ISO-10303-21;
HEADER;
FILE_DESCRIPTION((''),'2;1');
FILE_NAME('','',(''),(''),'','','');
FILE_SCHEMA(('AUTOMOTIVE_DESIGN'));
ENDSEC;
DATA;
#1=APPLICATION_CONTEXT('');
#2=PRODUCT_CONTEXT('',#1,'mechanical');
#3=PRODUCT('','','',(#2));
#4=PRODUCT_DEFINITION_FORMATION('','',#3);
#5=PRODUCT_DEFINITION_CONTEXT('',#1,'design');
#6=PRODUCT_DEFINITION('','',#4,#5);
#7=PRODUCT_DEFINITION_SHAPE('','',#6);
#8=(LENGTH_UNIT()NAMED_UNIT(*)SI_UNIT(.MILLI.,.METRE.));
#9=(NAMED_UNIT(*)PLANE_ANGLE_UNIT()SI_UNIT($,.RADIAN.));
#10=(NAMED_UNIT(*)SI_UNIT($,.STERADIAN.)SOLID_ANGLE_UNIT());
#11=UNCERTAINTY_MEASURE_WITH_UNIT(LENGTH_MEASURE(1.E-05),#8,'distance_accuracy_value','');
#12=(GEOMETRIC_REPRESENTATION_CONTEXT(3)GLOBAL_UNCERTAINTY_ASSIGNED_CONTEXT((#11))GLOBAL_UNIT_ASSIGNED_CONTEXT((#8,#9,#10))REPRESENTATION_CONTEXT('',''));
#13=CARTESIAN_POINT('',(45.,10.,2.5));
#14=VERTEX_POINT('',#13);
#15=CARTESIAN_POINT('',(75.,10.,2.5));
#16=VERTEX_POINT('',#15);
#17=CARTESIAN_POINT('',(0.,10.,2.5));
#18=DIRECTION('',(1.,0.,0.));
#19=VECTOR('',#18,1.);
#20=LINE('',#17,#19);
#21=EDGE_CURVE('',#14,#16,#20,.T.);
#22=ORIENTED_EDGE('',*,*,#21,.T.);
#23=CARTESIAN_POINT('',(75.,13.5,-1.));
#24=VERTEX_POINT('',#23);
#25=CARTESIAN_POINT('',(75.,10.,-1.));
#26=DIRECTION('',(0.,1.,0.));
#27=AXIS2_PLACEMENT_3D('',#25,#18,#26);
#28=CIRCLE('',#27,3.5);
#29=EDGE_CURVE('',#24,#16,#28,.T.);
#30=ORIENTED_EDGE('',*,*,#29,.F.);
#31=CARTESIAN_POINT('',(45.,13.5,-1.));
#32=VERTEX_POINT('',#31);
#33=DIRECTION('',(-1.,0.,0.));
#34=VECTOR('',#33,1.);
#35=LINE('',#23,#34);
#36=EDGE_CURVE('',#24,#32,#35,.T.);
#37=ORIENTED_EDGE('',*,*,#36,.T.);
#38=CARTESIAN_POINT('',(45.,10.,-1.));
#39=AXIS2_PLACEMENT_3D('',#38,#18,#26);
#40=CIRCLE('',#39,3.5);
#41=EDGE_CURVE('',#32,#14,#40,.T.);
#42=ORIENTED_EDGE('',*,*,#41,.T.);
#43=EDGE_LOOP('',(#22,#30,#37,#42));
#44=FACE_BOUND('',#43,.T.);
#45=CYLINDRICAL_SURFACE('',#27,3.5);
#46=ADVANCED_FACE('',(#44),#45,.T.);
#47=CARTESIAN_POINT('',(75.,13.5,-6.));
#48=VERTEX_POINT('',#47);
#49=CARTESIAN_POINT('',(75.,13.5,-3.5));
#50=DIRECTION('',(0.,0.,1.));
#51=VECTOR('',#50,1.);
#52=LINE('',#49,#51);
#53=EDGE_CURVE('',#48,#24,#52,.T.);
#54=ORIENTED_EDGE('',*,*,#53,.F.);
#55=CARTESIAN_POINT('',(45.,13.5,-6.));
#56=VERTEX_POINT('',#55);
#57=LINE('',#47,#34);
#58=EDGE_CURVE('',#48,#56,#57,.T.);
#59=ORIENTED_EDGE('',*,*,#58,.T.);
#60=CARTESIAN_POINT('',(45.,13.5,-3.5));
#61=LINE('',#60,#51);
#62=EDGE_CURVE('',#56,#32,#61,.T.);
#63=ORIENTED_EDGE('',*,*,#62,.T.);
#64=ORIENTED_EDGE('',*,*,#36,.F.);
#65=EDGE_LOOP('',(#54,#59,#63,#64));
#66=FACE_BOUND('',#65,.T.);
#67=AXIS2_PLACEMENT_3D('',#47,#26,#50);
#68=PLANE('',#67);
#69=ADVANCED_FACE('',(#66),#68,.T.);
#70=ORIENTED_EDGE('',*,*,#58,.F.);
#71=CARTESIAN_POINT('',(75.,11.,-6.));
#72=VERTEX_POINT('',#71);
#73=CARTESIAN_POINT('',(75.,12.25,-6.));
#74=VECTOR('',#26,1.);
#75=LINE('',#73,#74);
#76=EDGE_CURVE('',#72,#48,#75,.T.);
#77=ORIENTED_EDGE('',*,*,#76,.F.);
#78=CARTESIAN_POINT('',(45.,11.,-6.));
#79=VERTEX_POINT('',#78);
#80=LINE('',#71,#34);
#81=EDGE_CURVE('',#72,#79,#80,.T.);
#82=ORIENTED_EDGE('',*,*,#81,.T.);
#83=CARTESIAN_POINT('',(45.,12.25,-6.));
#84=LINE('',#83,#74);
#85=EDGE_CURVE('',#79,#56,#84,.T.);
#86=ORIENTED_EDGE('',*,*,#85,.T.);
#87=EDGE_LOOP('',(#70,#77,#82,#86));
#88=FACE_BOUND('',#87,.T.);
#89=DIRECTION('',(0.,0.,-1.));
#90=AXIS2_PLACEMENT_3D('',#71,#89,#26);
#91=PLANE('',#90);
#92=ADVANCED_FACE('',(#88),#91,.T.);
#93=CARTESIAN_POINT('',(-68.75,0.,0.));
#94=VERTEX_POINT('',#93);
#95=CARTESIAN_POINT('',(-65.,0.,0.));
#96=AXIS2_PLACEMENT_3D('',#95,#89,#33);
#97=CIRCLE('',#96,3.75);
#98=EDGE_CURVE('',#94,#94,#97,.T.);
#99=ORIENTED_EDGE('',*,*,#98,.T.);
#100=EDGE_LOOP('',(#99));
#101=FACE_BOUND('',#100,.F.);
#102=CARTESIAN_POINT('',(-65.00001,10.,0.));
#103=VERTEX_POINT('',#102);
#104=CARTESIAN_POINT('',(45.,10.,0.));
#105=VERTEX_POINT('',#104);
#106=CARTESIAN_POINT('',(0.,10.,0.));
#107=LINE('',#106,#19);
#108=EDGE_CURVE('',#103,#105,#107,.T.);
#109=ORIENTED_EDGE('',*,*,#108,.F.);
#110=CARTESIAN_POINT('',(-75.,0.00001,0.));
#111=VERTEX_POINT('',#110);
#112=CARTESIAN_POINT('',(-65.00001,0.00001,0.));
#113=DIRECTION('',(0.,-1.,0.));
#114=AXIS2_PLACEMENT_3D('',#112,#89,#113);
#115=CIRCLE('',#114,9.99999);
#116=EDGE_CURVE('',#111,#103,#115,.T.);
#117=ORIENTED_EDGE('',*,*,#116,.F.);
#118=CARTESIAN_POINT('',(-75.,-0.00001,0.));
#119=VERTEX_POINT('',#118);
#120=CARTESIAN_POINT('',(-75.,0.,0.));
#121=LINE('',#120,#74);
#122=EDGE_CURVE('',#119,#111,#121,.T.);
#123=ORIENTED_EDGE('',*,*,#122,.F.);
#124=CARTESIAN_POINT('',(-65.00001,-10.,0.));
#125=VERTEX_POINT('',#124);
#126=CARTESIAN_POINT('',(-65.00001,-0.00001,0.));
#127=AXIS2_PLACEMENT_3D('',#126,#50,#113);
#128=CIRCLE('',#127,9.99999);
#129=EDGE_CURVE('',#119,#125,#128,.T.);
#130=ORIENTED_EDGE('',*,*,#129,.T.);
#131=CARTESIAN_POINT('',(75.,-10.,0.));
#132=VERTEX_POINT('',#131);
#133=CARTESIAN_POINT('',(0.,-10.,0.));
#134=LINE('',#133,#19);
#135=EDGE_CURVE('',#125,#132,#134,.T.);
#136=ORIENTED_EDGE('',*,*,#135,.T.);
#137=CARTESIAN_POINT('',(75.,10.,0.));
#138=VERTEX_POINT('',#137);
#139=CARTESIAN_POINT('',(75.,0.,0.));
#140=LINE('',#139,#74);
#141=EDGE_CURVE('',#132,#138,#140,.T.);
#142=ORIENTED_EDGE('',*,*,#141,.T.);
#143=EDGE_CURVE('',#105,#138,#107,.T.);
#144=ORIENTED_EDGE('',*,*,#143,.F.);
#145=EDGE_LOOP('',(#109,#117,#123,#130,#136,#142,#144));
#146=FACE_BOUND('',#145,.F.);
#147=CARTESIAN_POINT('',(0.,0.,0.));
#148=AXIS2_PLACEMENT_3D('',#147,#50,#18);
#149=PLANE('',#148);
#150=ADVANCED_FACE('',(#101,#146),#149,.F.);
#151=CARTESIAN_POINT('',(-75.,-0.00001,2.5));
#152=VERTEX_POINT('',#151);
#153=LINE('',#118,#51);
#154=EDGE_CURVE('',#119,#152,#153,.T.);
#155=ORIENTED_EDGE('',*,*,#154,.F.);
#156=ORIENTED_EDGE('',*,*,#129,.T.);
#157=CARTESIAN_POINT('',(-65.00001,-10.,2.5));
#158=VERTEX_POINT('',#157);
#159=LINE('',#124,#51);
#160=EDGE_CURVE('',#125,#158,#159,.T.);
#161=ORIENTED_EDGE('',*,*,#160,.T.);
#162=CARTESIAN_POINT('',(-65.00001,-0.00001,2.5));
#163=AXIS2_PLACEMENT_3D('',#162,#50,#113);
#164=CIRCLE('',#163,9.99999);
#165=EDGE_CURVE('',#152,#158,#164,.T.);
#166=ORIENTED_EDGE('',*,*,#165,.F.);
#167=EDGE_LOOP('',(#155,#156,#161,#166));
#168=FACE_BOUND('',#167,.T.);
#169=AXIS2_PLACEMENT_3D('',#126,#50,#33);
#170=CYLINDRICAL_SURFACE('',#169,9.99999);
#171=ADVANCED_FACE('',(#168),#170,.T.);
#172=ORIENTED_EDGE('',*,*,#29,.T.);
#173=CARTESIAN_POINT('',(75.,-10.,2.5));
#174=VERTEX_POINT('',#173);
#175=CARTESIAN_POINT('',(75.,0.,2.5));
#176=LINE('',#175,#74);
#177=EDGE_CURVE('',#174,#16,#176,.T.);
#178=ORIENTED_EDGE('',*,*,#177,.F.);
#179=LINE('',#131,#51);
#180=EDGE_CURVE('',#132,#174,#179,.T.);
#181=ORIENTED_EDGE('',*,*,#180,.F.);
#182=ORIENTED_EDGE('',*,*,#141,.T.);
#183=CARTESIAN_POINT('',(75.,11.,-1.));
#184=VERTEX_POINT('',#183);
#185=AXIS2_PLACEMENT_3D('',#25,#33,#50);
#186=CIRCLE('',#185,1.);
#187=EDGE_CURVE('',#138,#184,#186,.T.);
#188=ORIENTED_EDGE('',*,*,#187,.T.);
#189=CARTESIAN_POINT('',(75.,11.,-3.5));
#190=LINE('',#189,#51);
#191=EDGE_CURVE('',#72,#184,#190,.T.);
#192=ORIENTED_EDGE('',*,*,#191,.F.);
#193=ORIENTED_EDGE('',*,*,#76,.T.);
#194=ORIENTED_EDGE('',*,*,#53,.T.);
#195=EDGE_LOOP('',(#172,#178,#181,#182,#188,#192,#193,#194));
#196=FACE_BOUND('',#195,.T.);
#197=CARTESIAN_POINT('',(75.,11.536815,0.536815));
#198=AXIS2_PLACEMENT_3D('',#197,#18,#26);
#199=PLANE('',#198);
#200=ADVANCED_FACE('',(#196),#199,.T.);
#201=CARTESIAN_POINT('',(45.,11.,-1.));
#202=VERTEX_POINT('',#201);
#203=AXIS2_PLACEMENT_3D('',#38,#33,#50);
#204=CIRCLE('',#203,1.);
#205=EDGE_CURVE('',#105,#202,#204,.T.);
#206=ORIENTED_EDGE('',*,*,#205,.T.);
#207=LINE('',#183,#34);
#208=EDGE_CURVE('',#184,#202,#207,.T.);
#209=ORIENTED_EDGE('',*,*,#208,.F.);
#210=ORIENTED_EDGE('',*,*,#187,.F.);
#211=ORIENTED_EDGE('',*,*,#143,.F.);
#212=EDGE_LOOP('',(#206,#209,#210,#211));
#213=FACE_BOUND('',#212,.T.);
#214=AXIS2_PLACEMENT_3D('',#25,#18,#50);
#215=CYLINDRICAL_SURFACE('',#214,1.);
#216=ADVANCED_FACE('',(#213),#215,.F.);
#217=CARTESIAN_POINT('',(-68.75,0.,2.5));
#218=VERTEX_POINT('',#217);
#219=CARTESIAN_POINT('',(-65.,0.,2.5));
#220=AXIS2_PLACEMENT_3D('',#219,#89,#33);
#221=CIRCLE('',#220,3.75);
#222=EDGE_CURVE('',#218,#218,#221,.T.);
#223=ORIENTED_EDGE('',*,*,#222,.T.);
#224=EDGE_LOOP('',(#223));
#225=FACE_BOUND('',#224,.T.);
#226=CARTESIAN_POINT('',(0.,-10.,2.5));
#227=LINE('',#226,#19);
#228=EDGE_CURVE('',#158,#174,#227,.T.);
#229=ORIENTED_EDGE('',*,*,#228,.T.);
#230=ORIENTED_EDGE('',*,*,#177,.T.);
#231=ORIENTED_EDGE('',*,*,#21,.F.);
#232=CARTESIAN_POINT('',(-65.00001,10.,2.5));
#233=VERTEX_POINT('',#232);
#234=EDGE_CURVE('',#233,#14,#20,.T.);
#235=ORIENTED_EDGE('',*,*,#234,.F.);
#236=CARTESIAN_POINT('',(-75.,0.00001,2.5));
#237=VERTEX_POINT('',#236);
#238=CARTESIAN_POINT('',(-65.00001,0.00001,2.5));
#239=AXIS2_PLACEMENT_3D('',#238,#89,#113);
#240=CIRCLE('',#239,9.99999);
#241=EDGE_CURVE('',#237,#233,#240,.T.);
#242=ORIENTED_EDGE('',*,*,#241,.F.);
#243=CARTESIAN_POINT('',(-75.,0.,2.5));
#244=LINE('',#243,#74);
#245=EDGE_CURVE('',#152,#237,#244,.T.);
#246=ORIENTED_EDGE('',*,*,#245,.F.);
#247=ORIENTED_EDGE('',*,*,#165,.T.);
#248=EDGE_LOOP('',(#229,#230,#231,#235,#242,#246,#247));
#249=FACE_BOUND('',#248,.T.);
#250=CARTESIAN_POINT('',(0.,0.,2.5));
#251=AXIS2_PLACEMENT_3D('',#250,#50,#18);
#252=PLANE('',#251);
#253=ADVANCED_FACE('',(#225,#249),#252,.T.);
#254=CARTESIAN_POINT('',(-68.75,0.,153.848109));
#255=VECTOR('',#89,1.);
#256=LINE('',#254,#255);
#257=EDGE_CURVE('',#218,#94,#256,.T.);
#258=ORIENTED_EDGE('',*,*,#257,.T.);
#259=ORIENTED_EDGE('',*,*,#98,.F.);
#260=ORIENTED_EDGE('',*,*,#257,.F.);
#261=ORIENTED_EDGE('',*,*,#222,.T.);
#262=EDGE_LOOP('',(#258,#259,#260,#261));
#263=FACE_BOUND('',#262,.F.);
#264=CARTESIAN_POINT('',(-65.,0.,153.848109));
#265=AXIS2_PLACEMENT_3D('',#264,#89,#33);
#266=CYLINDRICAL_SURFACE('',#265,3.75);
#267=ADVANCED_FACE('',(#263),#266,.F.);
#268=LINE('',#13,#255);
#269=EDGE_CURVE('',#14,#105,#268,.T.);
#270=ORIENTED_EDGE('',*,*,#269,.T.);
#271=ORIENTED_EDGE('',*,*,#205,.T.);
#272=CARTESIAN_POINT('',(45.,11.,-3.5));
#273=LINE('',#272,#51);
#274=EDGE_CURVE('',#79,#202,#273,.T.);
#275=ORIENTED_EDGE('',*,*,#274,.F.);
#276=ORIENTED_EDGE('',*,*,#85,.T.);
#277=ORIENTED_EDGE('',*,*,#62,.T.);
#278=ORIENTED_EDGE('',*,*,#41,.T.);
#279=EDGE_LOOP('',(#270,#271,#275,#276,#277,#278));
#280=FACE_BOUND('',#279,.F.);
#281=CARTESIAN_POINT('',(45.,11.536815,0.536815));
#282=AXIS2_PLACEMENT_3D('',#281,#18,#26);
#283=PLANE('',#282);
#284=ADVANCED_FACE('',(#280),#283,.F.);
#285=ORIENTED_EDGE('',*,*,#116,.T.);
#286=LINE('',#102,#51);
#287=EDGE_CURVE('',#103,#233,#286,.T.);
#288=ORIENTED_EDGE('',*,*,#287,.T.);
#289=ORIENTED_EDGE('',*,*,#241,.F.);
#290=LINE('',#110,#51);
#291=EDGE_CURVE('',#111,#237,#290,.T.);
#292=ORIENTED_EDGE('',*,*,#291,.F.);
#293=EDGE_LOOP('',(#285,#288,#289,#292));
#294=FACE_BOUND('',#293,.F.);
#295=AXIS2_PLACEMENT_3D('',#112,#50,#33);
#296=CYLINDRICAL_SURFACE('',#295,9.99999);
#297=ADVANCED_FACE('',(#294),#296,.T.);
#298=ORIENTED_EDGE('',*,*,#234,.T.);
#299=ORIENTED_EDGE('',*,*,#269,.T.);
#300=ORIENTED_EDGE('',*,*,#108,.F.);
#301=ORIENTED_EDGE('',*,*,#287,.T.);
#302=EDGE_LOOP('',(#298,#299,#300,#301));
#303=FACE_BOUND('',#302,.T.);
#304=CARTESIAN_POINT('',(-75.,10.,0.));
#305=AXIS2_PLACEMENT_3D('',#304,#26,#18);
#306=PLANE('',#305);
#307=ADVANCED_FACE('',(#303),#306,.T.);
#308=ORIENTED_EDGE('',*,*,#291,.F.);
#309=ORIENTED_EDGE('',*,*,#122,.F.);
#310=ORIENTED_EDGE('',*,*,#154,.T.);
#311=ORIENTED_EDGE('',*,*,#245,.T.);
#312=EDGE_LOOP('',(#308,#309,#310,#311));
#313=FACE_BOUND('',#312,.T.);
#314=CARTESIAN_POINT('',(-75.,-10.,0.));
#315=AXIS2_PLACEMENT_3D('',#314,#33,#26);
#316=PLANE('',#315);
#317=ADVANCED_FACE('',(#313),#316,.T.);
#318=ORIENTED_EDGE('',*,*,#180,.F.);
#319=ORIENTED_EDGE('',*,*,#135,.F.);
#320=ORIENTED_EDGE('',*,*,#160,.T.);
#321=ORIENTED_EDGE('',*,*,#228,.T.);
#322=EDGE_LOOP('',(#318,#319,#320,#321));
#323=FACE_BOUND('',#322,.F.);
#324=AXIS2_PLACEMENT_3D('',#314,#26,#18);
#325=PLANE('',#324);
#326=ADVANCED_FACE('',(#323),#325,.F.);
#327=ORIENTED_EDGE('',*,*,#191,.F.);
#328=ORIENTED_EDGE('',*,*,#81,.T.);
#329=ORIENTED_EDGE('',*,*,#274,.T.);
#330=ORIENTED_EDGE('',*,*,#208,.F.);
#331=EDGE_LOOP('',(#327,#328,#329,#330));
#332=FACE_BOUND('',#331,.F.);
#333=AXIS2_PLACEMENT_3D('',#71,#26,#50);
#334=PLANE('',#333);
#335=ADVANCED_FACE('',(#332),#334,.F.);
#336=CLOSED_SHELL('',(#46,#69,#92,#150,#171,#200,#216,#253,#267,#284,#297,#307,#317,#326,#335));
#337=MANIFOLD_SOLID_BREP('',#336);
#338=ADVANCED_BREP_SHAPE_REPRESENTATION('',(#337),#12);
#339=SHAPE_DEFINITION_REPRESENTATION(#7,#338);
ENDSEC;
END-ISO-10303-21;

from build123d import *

# Parameters (mm, degrees)
F0_W     = 150
F0_H     = 20
F1_DEPTH = 2.5
F3_D     = 7.5
F4_R     = 9.99999
F5_W     = 2.5
F5_H     = 5
F6_DEPTH = 30


# Not quite as in the source:
# - a fillet or chamfer is up to 0.001 mm smaller than in the source, because OpenCascade refuses the exact size


with BuildPart() as f1:
    # F0 (on Top) → F1 (new body)
    with BuildSketch(Plane.XY):
        Rectangle(F0_W, F0_H)
    extrude(amount=F1_DEPTH)

    # F3 (through all)
    with Locations(Plane.XY.offset(2.5)):
        with Locations((-65, 0)):
            Hole(F3_D / 2)

    # F4 (radius 10 in the source; OpenCascade refuses exactly that, so slightly less here)
    f4_edges = [f1.edges().sort_by_distance(p)[0] for p in [
        (-75, -10, 1.25),
        (-75, 10, 1.25),
    ]]
    fillet(f4_edges, radius=F4_R)

    # F5 (on face) → F6 (join)
    with BuildSketch(Plane.YZ.offset(75)):
        with BuildLine():
            ThreePointArc((10, 0), (10.7071067812, -0.2928932188), (11, -1))
            Line((11, -1), (13.5, -1))
            ThreePointArc((13.5, -1), (12.4748737342, 1.4748737342), (10, 2.5))
            Line((10, 2.5), (10, 0))
        make_face()
        with Locations((12.25, -3.5)):
            Rectangle(F5_W, F5_H)
    extrude(amount=-F6_DEPTH)


solid = f1.part
